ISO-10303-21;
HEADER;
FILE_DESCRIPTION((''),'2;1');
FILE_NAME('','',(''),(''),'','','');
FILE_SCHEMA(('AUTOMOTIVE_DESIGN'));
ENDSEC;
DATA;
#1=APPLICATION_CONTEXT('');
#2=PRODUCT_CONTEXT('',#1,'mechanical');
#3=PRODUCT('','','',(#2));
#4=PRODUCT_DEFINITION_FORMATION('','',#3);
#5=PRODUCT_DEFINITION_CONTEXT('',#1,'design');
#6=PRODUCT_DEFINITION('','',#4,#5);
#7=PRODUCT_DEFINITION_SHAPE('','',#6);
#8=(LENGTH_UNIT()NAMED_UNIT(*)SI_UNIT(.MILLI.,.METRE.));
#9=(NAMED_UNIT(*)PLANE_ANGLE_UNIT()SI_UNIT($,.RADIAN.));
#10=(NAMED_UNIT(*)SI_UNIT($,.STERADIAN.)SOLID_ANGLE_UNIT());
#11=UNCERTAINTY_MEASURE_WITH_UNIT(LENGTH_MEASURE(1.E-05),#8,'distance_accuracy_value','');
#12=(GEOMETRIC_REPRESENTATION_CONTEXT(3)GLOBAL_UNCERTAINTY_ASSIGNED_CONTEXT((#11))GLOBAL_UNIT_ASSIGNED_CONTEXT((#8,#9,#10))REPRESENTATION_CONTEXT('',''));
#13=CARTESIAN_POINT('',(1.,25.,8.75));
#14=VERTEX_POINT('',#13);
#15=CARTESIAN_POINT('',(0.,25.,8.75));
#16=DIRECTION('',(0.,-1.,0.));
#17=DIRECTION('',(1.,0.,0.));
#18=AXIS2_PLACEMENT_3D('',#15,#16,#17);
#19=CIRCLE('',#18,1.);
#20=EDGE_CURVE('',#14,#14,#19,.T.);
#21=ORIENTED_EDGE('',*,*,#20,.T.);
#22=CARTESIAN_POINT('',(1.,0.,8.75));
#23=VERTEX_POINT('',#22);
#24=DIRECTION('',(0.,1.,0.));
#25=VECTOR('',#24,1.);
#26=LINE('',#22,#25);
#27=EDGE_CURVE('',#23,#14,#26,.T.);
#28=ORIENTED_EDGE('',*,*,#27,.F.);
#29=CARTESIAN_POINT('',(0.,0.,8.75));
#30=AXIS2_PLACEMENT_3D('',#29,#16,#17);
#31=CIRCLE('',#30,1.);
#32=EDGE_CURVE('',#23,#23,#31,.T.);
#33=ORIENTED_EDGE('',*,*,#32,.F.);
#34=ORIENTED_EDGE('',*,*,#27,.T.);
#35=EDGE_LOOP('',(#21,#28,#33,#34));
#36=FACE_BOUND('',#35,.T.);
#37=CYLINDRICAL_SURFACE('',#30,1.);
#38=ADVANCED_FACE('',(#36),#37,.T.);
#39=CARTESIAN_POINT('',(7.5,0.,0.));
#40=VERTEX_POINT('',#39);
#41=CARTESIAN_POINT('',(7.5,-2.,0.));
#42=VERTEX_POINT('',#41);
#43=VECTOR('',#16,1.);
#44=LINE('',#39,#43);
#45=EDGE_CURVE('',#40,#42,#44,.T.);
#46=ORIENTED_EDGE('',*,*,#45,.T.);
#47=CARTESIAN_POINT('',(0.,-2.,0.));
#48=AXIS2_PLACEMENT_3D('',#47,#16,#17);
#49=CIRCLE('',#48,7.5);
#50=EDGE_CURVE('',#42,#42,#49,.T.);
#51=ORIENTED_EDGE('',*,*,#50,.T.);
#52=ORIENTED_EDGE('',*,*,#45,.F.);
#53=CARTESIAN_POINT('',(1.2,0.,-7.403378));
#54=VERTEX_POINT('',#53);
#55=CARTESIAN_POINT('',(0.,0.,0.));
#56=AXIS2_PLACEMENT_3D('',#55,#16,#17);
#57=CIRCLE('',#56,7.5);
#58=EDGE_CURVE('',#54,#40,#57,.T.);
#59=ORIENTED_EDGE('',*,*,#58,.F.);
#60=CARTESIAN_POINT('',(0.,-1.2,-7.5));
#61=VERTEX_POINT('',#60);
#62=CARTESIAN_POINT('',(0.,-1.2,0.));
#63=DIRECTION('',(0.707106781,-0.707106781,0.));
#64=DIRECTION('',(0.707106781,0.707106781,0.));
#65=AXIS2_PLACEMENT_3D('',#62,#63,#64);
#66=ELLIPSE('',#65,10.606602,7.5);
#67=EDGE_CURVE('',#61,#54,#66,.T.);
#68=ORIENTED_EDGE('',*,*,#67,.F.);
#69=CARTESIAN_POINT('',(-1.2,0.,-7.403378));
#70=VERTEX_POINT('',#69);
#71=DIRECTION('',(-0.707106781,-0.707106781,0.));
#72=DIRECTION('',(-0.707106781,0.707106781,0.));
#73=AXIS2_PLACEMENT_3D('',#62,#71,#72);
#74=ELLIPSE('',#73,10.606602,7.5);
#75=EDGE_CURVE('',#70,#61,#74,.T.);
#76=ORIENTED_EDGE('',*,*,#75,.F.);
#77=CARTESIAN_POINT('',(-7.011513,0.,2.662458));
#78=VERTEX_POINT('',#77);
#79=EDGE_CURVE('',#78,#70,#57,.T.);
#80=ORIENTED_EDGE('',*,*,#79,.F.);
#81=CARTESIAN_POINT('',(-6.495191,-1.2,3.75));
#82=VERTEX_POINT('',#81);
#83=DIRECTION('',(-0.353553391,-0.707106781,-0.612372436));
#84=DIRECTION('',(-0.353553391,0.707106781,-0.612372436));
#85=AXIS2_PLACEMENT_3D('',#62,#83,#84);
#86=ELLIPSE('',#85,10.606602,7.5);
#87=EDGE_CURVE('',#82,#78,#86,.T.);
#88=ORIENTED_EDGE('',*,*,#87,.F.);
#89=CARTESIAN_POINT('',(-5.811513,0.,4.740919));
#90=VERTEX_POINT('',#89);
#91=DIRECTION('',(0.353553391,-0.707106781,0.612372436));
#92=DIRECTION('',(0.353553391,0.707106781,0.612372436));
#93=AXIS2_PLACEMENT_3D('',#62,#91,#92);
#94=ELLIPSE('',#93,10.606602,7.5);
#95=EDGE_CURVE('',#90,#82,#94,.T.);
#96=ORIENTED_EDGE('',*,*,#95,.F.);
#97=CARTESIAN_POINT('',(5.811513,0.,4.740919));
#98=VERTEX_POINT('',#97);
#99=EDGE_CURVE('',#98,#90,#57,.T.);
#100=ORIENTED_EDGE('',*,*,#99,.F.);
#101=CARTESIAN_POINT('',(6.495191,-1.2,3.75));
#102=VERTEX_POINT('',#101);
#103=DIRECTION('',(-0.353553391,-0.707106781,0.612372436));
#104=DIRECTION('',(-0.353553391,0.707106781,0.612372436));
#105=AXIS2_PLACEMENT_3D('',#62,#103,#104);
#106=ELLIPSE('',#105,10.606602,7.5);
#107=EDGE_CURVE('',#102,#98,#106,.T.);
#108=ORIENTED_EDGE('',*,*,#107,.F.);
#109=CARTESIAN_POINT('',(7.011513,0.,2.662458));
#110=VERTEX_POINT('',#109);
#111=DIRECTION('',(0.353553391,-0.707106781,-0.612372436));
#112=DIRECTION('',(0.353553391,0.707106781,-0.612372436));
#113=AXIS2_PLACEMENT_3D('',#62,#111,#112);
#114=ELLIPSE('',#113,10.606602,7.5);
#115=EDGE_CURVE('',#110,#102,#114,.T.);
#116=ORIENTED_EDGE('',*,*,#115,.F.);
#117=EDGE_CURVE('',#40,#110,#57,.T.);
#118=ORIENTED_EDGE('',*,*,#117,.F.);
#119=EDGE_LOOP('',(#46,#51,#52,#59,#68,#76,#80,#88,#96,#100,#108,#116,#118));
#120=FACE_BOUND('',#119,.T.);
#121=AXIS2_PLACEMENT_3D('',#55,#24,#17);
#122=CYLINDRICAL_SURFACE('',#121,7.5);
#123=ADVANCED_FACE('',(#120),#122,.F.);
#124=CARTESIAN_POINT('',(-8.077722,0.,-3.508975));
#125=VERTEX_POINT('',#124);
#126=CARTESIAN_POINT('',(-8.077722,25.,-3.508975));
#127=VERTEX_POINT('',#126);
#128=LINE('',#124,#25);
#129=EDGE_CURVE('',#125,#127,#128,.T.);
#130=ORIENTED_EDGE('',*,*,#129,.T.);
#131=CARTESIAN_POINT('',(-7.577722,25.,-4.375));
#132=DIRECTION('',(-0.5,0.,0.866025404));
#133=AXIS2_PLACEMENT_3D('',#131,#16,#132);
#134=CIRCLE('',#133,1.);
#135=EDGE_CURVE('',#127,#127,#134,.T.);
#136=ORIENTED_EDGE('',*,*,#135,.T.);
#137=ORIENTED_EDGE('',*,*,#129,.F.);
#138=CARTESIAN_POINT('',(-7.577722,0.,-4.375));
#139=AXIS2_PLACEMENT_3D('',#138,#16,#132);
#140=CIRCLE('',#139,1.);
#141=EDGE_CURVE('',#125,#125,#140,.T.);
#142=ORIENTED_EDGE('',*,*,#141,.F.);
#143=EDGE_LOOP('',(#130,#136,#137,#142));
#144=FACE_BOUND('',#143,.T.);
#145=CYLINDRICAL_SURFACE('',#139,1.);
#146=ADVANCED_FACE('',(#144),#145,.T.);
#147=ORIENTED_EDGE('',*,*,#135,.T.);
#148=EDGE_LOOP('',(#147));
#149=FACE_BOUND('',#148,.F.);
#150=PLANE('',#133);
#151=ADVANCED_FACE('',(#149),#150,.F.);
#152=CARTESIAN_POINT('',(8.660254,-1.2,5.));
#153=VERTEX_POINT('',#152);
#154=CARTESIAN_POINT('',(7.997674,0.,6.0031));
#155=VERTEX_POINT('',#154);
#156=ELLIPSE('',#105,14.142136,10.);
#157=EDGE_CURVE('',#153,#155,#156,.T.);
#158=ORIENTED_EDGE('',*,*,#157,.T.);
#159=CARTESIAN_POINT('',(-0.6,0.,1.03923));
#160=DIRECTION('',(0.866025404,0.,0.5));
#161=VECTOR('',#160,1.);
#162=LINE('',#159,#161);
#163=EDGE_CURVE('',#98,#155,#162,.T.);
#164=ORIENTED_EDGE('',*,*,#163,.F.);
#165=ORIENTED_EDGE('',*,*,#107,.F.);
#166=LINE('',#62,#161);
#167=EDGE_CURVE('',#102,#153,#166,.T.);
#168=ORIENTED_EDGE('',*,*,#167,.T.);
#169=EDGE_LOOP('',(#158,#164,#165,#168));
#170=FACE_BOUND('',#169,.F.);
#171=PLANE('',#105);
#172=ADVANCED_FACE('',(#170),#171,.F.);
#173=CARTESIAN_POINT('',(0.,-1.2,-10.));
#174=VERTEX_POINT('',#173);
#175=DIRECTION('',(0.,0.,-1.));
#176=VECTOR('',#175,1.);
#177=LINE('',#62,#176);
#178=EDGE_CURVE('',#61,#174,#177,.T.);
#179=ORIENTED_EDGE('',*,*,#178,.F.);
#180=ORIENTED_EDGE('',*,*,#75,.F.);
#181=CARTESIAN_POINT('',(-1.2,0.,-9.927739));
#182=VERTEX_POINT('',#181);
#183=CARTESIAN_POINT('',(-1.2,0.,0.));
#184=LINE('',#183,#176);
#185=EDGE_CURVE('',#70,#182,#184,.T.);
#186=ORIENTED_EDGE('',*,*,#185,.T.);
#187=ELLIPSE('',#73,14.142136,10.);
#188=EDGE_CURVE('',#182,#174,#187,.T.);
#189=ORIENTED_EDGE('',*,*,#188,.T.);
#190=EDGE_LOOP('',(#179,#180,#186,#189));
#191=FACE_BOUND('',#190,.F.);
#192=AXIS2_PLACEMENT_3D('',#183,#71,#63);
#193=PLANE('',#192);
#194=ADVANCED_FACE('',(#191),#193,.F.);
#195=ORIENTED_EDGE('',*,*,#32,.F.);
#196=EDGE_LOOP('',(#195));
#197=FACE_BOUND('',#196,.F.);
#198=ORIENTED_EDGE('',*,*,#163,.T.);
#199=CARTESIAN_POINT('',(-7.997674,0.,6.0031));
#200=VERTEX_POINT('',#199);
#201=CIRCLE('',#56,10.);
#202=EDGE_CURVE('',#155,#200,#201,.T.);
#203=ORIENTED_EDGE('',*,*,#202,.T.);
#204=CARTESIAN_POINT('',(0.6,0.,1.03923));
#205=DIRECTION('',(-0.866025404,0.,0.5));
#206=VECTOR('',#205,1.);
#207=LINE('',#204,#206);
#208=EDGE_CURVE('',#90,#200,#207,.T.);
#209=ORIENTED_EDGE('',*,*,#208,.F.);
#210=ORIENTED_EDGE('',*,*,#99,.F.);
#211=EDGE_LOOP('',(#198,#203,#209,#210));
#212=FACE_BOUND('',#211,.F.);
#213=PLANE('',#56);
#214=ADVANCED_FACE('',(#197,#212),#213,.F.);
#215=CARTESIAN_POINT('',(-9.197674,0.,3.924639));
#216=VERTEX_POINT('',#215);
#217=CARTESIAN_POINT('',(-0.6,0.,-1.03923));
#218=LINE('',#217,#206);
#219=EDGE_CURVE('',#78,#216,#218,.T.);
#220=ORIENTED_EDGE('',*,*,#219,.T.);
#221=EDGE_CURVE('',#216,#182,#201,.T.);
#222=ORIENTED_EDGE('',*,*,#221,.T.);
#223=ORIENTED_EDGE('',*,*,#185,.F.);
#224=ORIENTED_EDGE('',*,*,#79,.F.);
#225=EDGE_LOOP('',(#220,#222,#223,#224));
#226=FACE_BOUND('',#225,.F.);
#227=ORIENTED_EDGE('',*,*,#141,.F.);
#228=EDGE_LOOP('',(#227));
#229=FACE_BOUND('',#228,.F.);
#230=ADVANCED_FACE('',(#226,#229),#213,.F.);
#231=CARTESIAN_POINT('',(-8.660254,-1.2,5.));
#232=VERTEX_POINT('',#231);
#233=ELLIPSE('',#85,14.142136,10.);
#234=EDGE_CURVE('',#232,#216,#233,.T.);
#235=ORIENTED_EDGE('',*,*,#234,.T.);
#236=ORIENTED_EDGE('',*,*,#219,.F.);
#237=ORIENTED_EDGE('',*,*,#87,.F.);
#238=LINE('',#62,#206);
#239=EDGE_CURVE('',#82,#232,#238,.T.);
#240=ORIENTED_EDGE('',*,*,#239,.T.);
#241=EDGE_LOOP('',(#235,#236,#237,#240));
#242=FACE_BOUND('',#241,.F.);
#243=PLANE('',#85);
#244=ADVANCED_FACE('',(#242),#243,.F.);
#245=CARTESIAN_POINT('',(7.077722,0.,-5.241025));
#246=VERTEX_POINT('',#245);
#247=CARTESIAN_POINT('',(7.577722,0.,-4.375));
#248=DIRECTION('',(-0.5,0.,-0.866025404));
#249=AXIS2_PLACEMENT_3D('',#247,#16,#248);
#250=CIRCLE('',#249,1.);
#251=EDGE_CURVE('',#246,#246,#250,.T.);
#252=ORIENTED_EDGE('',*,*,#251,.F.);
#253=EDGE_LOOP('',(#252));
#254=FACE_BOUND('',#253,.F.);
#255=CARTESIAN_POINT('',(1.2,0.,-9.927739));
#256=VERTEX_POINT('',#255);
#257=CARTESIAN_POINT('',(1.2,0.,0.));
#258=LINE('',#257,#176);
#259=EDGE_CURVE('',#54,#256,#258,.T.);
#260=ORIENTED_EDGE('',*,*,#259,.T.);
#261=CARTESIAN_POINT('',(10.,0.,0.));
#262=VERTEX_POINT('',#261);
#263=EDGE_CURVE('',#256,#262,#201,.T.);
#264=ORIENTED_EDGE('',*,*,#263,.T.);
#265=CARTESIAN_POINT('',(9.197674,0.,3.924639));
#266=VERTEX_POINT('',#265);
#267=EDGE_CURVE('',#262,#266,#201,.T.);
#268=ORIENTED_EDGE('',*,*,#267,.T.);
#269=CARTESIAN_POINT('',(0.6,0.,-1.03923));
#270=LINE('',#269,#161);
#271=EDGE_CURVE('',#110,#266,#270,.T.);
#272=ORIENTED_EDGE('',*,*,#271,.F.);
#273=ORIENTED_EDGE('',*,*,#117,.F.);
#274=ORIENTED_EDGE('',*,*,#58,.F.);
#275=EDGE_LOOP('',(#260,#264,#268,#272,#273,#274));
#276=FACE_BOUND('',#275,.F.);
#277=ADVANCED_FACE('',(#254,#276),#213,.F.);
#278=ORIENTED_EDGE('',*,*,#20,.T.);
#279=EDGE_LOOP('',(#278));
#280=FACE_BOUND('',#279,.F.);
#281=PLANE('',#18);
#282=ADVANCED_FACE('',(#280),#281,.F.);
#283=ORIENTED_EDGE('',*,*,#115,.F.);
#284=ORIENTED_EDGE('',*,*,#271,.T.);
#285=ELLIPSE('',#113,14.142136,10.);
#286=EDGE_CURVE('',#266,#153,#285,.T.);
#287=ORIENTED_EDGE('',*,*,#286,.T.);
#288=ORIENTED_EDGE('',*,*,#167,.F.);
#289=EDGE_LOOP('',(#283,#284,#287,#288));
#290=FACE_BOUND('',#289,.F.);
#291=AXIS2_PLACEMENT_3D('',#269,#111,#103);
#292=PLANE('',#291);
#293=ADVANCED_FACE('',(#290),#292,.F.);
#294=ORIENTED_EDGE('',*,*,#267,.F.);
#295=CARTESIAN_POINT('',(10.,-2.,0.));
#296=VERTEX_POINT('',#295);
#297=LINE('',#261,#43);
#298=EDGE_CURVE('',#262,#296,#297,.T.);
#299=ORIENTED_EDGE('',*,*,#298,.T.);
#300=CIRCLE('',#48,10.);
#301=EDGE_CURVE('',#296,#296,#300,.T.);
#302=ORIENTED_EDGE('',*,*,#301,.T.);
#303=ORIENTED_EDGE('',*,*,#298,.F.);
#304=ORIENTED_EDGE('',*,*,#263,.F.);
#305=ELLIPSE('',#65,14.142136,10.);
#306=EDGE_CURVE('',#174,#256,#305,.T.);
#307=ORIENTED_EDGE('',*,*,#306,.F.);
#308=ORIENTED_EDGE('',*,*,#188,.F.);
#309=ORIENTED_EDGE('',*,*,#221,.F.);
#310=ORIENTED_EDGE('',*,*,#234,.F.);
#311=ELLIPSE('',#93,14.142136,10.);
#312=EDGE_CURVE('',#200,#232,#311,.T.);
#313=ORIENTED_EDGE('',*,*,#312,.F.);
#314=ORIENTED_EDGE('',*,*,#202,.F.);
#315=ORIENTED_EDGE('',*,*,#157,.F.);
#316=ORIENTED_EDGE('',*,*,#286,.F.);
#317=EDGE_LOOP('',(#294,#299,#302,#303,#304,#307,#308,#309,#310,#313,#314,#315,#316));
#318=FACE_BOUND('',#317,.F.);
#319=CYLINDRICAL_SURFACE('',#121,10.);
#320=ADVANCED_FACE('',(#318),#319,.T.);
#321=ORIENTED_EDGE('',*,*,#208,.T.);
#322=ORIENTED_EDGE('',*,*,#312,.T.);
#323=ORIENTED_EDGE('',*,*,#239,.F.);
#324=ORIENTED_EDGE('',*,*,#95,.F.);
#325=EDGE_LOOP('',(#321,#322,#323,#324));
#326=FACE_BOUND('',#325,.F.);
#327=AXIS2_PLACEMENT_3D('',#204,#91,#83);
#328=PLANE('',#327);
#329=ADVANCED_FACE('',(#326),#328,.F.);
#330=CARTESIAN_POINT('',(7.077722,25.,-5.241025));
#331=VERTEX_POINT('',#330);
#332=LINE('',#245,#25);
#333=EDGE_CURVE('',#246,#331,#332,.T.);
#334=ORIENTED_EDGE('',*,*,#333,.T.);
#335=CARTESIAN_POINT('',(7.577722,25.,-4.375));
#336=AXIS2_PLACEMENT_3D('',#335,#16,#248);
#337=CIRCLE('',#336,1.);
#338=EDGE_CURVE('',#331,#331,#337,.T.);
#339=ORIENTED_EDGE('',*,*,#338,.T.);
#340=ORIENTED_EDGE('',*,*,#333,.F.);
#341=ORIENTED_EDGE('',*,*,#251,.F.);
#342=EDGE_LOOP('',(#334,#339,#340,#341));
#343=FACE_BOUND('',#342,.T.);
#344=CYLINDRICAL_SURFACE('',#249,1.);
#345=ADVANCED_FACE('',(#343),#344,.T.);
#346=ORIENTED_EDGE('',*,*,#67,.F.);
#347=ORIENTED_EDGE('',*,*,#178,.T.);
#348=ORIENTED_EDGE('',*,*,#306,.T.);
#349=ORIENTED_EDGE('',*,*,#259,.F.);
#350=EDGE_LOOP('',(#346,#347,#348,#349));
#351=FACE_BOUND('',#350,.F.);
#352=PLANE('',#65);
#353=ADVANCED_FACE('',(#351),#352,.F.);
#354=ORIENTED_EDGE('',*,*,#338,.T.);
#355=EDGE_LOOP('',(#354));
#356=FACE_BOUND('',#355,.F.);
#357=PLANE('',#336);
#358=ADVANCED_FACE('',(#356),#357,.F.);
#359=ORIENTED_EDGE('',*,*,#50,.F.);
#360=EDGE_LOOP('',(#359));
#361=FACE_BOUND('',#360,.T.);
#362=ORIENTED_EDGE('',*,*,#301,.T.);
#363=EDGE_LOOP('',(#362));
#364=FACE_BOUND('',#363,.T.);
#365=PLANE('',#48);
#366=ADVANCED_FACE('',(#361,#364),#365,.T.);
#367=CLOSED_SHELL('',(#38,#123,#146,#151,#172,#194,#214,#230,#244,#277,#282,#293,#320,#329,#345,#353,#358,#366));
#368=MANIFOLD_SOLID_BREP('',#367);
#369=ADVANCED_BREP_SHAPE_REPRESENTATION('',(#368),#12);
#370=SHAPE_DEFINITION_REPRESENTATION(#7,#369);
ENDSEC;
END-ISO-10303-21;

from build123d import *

# Parameters (mm, degrees)
F0_R            = 10
F0_R_2          = 7.5
F1_DEPTH        = 2
F3_DEPTH        = 25
F3_COPIES_COUNT = 3
F4_R            = 1
F5_DEPTH        = 25
F5_COPIES_COUNT = 3


# Not quite as in the source:
# - a pattern or mirror of a feature is missing from the dataset's text; its kind, count and spacing are read off the source's solid


with BuildPart() as f1:
    # F0 (on Front) → F1 (new body)
    with BuildSketch(Plane.XZ):
        Circle(F0_R)
        Circle(F0_R_2, mode=Mode.SUBTRACT)
    extrude(amount=F1_DEPTH)

    # F2 (on Top) → F3 (cut)
    with BuildSketch(Plane.XY):
        Polygon((-1.2, 0), (0, -1.2), (1.2, 0), align=None)
    f3 = extrude(amount=-F3_DEPTH, mode=Mode.SUBTRACT)

    # F3_copies: F3 ×3 about axis
    f3_copies_axis = Axis((0, 0, 0), (0, 1, 0))
    for i in range(1, F3_COPIES_COUNT):
        add(f3.rotate(f3_copies_axis, i * 360 / F3_COPIES_COUNT), mode=Mode.SUBTRACT)

    # F4 (on Front) → F5 (join)
    with BuildSketch(Plane.XZ):
        with Locations((0, 8.75)):
            Circle(F4_R)
    f5 = extrude(amount=-F5_DEPTH)

    # F5_copies: F5 ×3 about axis
    f5_copies_axis = Axis((0, 0, 0), (0, 1, 0))
    for i in range(1, F5_COPIES_COUNT):
        add(f5.rotate(f5_copies_axis, i * 360 / F5_COPIES_COUNT))


solid = f1.part
